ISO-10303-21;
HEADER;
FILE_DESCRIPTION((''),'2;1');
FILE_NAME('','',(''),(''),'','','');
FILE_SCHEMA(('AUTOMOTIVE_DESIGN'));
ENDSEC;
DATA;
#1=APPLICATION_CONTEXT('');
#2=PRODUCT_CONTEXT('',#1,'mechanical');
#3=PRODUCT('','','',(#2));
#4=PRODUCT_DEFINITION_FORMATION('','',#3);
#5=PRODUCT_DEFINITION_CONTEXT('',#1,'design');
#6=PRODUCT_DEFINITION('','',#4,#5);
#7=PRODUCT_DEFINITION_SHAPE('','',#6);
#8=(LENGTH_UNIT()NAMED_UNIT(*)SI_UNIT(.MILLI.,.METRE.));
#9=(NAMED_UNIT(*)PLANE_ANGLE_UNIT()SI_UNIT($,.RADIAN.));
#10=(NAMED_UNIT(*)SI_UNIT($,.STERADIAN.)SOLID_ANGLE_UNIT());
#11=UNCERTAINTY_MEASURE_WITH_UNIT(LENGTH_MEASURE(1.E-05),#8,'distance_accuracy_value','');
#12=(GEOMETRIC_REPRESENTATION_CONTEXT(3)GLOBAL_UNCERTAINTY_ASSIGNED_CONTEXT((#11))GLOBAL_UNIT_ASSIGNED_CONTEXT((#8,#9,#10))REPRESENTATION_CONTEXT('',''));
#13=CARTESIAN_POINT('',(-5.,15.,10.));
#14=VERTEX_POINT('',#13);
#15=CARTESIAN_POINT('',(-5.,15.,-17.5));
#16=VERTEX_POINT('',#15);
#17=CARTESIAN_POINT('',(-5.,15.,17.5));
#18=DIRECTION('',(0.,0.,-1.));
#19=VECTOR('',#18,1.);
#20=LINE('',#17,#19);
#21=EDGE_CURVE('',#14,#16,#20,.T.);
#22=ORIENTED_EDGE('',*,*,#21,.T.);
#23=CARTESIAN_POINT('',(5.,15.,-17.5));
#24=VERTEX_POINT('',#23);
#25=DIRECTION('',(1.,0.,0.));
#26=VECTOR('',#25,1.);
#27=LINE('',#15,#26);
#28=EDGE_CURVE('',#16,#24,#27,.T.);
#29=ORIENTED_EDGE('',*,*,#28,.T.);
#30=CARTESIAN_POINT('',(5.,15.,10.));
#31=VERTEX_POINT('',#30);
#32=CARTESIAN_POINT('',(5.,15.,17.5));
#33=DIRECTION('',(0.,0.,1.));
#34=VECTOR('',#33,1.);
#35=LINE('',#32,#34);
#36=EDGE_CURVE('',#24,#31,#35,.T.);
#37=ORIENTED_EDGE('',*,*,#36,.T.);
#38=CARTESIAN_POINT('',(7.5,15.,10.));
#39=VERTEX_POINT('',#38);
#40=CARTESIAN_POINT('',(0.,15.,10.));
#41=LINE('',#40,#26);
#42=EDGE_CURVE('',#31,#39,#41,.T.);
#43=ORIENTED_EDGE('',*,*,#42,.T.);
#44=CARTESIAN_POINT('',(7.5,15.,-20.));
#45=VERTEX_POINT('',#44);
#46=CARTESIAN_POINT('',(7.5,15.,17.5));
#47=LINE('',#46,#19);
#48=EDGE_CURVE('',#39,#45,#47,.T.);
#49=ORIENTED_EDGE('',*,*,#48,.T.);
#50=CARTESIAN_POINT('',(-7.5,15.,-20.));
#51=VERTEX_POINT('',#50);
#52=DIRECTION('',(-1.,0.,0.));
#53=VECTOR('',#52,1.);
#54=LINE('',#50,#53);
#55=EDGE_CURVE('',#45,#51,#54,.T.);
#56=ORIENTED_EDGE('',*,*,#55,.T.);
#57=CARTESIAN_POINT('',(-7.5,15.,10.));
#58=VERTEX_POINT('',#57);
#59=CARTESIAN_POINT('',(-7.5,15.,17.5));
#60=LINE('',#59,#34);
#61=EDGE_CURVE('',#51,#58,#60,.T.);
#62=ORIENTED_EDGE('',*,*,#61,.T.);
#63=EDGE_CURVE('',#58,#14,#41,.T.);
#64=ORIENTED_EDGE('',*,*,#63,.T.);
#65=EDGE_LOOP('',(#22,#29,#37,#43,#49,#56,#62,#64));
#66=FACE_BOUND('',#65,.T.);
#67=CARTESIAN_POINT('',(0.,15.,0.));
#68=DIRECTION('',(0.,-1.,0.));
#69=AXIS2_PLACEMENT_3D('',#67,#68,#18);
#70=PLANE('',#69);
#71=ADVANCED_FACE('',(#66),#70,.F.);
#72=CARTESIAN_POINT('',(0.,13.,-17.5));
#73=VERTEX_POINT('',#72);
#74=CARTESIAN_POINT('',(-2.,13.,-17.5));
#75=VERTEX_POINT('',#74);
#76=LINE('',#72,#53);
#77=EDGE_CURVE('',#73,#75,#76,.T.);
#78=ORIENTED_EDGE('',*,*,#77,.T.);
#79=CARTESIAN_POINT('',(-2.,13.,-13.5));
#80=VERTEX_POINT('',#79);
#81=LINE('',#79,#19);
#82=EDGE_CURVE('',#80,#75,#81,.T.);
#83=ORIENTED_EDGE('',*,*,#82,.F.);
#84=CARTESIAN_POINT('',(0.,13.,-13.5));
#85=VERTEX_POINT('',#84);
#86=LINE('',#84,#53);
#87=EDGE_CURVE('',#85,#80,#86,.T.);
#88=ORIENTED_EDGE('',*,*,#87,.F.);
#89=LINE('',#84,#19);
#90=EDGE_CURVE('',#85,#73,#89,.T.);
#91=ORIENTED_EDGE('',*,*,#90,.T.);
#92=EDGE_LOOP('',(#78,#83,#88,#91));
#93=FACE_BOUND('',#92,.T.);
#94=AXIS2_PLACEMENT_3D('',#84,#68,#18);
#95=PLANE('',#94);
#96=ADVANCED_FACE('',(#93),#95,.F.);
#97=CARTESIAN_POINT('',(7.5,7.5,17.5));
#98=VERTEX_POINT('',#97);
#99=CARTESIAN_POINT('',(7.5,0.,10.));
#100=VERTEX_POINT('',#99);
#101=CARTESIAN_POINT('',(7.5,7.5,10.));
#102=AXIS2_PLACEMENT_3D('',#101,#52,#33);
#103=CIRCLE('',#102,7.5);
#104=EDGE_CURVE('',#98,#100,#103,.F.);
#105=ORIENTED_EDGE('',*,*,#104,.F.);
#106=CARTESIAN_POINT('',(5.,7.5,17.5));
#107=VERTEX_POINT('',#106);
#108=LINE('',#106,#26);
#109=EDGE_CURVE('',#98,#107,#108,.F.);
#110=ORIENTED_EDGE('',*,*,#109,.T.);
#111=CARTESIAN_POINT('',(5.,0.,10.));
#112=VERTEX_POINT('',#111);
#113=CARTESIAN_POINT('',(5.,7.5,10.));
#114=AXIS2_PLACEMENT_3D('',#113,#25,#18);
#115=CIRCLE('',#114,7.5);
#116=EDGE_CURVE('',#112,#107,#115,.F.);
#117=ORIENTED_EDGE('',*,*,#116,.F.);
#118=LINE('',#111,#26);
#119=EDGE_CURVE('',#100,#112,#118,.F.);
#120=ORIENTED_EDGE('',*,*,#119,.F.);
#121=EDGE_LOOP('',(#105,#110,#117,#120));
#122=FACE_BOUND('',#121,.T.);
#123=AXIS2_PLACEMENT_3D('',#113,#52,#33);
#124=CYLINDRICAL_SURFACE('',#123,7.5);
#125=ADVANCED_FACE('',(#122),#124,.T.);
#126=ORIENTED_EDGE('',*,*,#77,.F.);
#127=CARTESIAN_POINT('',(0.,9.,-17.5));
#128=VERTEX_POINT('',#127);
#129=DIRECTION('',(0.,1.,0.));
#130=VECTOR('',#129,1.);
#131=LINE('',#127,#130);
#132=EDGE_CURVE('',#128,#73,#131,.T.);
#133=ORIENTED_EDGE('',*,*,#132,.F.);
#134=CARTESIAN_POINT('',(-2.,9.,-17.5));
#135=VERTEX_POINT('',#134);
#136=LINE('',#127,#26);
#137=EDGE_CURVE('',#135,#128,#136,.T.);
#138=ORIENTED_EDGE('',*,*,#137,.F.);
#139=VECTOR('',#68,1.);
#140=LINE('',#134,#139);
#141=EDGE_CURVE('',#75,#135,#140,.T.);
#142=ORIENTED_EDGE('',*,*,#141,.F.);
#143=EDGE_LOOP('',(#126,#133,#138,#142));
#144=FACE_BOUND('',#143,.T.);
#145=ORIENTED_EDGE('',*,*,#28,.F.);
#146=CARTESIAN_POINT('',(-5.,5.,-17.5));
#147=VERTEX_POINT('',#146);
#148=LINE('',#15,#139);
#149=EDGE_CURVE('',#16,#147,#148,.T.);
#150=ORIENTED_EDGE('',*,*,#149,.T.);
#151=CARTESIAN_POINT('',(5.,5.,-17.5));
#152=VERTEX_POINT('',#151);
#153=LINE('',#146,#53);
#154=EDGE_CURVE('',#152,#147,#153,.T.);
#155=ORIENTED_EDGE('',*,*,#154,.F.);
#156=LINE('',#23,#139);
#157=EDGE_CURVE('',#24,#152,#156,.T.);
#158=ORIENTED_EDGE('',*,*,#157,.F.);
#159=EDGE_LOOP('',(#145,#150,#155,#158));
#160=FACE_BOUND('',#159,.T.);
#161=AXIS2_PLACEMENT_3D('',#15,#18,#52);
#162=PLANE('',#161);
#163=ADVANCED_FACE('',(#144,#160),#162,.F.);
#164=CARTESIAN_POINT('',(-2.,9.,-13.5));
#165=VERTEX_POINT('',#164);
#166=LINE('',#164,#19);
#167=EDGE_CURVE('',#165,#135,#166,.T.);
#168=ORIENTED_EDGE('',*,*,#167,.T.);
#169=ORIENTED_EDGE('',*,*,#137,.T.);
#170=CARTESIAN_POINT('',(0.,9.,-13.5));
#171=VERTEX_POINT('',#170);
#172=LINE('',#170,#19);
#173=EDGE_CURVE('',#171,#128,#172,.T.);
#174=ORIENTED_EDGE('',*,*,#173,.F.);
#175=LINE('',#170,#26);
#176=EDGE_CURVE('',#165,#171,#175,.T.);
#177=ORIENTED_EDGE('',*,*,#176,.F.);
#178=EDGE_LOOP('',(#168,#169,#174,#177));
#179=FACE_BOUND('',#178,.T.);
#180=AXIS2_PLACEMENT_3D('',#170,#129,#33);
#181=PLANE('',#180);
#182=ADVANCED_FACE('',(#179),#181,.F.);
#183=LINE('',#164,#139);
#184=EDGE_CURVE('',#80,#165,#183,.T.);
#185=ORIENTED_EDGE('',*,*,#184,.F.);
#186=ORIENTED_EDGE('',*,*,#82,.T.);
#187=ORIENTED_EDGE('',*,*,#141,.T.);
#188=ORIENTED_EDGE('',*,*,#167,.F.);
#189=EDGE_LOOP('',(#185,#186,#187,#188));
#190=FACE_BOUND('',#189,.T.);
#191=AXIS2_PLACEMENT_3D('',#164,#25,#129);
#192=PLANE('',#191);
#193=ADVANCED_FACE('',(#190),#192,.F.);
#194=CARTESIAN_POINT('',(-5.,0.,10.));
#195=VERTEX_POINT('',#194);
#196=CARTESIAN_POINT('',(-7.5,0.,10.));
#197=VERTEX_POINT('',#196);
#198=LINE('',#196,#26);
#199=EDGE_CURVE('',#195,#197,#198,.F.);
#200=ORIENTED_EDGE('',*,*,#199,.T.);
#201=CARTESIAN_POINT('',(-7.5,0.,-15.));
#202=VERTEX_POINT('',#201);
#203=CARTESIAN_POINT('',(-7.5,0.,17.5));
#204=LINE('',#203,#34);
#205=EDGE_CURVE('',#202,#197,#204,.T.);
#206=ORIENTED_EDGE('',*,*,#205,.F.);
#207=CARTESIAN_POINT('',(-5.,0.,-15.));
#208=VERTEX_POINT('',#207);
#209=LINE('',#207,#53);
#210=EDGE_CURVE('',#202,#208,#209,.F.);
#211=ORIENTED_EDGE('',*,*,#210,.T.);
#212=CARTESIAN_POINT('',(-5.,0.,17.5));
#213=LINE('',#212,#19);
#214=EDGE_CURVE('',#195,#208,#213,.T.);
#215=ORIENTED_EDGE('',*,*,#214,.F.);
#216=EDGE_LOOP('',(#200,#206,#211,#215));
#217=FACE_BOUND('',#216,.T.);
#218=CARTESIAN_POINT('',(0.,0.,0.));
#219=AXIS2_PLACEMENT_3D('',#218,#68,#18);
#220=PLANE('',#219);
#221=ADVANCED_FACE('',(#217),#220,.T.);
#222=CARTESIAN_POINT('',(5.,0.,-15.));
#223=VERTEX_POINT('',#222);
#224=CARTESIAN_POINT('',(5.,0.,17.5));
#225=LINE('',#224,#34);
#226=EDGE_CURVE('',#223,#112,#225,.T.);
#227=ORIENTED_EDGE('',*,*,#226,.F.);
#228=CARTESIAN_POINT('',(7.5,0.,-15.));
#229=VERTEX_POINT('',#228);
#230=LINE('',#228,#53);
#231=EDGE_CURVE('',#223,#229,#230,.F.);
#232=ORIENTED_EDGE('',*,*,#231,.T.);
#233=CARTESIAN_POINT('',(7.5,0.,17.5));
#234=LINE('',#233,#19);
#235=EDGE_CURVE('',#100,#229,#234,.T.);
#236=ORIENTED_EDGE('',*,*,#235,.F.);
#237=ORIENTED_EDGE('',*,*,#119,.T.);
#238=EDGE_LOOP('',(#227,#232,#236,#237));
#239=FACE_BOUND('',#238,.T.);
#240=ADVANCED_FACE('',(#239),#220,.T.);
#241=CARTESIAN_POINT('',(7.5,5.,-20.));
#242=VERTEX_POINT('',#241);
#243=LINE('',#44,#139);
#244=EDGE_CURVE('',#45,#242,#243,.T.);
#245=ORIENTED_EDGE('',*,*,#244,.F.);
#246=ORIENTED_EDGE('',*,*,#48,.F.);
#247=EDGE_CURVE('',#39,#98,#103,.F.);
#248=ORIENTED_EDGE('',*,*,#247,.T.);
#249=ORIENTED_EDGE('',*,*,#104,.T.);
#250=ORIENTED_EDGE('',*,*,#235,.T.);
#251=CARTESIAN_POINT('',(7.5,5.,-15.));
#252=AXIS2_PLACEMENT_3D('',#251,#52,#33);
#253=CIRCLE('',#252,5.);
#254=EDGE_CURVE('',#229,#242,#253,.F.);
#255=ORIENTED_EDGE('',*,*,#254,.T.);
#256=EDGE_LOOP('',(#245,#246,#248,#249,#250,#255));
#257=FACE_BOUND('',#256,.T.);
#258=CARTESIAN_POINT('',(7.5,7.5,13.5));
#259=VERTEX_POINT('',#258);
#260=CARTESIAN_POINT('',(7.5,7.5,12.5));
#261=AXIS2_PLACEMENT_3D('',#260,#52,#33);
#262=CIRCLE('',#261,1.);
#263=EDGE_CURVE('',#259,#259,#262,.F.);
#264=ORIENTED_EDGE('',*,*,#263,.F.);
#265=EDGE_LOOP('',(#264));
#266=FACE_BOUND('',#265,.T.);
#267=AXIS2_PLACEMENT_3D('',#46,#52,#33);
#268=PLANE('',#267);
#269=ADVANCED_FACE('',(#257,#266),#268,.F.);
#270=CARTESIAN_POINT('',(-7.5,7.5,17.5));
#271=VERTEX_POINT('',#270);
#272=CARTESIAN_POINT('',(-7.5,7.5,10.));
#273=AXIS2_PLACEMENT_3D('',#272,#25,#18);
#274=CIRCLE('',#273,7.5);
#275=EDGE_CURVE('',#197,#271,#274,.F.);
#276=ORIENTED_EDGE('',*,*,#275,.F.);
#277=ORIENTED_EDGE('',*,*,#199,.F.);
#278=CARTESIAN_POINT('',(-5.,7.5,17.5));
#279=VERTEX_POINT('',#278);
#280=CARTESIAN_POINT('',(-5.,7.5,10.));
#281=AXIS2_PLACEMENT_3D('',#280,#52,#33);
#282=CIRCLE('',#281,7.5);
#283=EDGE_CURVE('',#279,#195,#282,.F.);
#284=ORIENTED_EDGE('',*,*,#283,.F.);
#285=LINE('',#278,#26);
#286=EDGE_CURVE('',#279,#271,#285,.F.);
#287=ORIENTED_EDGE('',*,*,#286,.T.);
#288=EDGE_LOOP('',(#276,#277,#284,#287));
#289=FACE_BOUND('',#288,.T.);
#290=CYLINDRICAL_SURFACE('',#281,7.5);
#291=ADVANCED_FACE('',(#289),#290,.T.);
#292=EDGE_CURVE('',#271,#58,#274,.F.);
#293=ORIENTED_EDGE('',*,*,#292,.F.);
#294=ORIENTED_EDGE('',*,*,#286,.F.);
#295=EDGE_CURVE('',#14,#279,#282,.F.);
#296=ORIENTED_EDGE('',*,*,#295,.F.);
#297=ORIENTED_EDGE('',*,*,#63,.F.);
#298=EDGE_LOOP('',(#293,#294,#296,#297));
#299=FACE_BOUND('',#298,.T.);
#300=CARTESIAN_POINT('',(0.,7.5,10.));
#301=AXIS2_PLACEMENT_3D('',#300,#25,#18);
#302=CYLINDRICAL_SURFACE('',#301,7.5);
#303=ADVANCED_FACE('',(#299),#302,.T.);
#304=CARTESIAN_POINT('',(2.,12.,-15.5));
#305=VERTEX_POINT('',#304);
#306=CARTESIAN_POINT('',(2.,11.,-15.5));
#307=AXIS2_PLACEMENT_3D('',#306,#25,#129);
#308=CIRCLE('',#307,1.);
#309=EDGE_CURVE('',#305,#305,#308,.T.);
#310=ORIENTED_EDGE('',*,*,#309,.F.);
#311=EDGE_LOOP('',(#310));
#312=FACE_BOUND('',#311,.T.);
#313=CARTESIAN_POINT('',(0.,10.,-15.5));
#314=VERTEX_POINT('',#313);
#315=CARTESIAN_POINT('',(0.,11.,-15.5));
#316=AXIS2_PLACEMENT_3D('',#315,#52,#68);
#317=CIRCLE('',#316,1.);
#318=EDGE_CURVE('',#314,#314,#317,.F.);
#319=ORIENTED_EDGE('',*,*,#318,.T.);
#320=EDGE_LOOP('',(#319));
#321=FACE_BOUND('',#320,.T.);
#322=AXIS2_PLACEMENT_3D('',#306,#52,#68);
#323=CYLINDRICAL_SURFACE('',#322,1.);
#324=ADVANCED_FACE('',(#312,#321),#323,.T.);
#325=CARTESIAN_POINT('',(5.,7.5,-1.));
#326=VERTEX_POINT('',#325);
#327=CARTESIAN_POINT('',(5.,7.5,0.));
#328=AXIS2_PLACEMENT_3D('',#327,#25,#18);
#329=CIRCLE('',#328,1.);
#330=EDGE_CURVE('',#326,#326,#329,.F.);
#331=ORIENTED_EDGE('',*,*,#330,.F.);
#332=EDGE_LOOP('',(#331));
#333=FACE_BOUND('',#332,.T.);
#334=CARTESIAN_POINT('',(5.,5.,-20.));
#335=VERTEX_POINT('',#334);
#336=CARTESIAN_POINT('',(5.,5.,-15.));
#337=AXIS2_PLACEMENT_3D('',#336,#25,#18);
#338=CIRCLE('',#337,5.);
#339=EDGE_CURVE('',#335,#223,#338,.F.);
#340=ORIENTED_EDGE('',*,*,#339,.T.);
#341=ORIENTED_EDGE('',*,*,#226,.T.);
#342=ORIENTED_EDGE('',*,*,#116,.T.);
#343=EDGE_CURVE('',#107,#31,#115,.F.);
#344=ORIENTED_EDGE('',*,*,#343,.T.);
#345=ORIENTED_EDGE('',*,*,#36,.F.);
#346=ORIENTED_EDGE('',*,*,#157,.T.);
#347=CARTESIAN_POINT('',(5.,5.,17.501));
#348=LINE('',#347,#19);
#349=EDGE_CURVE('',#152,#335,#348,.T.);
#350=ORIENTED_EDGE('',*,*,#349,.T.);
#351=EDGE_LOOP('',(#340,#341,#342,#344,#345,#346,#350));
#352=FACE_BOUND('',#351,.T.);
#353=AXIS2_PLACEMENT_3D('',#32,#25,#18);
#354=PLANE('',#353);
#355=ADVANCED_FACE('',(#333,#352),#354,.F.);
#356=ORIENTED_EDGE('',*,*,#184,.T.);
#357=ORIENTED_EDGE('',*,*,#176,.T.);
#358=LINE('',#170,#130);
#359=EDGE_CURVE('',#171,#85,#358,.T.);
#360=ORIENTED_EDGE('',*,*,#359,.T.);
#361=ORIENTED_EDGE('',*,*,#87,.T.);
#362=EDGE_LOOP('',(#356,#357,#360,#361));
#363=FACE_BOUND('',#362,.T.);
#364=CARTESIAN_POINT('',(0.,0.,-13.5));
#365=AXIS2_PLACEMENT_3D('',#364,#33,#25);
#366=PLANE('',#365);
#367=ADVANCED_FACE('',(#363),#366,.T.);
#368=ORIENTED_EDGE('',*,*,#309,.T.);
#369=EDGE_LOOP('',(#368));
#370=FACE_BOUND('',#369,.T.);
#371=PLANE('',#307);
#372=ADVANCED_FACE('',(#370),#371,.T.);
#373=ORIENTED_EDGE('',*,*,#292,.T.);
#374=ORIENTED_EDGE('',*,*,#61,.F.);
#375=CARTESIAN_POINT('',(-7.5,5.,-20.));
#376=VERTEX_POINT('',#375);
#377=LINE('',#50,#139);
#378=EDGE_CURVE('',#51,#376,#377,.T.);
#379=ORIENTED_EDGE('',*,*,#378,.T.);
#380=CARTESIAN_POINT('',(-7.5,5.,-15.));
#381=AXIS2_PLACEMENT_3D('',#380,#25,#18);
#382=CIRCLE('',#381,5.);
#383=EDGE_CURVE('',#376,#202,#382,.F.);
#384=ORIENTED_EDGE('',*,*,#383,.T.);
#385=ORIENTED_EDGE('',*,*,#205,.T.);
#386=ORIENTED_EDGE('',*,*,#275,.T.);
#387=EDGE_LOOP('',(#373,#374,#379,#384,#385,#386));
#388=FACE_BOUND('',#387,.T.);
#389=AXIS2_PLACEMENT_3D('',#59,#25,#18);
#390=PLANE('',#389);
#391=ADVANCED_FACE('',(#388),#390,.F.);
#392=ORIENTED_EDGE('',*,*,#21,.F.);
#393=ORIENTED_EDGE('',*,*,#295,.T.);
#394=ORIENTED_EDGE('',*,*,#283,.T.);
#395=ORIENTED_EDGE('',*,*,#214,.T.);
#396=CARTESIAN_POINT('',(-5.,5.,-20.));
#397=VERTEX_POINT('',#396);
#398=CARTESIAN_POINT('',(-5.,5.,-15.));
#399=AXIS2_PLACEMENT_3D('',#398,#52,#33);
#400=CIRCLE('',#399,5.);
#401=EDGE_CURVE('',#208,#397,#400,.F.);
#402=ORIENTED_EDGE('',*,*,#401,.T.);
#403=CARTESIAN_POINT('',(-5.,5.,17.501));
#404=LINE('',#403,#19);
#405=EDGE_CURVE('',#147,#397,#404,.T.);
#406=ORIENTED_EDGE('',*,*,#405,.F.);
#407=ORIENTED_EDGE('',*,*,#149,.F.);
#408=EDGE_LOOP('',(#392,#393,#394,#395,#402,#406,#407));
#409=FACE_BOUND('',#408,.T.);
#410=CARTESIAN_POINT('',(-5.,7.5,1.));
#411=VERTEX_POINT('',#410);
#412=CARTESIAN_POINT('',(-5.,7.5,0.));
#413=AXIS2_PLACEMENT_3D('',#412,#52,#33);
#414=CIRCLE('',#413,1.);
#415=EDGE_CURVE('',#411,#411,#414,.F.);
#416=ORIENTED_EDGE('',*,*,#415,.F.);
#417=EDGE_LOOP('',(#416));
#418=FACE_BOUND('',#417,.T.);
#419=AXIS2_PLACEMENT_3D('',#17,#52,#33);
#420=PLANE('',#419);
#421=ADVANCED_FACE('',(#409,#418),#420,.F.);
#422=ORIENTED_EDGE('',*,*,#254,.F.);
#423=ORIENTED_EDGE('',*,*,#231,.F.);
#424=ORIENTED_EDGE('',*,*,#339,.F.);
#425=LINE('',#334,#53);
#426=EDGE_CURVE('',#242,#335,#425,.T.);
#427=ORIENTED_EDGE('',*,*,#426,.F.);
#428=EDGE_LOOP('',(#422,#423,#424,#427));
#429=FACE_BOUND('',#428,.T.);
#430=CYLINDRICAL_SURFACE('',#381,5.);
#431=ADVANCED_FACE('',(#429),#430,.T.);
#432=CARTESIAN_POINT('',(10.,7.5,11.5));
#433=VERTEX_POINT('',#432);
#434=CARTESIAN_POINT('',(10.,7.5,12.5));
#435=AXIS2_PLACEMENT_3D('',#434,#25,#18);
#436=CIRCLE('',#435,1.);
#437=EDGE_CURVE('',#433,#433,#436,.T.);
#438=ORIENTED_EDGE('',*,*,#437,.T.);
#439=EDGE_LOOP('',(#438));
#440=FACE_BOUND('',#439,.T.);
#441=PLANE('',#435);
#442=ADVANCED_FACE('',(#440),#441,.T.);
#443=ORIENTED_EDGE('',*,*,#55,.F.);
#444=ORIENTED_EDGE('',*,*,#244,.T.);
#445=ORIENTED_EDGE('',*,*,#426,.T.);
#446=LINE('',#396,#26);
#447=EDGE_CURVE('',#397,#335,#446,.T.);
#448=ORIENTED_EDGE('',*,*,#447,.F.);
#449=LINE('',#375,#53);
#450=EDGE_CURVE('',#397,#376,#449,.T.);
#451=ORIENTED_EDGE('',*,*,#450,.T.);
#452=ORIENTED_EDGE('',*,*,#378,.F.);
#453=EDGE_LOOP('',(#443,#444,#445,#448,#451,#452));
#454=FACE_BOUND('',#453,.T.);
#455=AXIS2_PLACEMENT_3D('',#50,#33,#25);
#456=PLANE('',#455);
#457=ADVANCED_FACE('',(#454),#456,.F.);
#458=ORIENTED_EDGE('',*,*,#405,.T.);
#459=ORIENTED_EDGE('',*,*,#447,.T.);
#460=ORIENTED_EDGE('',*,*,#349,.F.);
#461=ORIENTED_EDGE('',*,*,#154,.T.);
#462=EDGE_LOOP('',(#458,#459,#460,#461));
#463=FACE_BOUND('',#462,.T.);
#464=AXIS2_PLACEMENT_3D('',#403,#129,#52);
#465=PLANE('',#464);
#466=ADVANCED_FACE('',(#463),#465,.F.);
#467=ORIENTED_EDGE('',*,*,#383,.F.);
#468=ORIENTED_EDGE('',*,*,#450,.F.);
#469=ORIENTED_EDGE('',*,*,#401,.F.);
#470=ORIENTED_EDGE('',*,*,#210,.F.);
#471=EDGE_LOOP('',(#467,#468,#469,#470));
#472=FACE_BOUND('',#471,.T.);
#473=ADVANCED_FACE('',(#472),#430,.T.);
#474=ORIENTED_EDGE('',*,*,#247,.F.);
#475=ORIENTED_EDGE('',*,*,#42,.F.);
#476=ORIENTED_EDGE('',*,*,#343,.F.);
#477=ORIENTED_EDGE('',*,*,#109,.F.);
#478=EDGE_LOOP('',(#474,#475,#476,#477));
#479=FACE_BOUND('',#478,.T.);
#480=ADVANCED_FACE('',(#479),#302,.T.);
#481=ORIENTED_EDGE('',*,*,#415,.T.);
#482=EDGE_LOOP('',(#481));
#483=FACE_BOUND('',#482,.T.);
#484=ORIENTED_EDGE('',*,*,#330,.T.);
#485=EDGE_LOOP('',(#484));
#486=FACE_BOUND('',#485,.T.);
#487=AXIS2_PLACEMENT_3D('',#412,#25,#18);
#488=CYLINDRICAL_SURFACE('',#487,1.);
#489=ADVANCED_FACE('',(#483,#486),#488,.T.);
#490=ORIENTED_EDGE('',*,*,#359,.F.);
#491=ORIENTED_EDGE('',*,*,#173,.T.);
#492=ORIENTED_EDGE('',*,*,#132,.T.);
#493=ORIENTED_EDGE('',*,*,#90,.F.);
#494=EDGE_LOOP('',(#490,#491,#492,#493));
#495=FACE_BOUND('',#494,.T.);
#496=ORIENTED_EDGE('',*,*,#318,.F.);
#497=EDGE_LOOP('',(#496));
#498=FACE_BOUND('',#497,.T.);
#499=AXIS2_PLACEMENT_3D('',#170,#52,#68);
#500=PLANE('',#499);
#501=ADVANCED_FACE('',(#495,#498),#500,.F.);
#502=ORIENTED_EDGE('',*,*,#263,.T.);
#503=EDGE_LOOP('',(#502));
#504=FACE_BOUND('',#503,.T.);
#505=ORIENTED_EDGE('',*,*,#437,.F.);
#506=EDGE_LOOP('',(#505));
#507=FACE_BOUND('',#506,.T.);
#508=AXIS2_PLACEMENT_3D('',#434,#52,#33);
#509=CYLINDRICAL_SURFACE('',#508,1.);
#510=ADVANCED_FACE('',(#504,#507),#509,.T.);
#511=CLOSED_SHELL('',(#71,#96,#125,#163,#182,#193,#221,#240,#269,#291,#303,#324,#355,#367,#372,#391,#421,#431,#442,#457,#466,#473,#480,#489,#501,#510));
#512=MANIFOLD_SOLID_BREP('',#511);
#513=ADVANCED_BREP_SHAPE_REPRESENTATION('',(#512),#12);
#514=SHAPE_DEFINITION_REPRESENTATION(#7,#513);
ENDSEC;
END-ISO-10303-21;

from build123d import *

# Parameters (mm, degrees)
BOSS_EXTRUDE1_DEPTH = 15
SKETCH4_R           = 1
BOSS_EXTRUDE3_DEPTH = 10
SKETCH5_R           = 1
BOSS_EXTRUDE4_DEPTH = 2.5
CUT_EXTRUDE1_REACH  = 43.608
SKETCH6_W           = 10
SKETCH6_H           = 5
FILLET1_R           = 7.5
FILLET2_R           = 5
SKETCH7_W           = 2
SKETCH7_H           = 4
BOSS_EXTRUDE5_DEPTH = 4
SKETCH8_R           = 1
BOSS_EXTRUDE6_DEPTH = 2


with BuildPart() as part:
    # Sketch1 → Boss-Extrude1 (new body)
    with BuildSketch(Plane(origin=(0, 0, 0), x_dir=(1, 0, 0), z_dir=(0, 1, 0))):
        Polygon((-7.5, -17.5), (-7.5, 20), (7.5, 20), (7.5, -17.5), (5, -17.5), (5, 17.5), (-5, 17.5), (-5, -17.5), align=None)
    extrude(amount=BOSS_EXTRUDE1_DEPTH)

    # Sketch4 → Boss-Extrude3 (add)
    with BuildSketch(Plane.ZY.offset(-5)):
        with Locations(Location((0, 7.5, 0), (0, 0, 180))):
            Circle(SKETCH4_R)
    extrude(amount=BOSS_EXTRUDE3_DEPTH)

    # Sketch5 → Boss-Extrude4 (add)
    with BuildSketch(Plane(origin=(7.5, 0, 0), x_dir=(0, 0, -1), z_dir=(1, 0, 0))):
        with Locations(Location((-12.5, 7.5, 0), (0, 0, 180))):
            Circle(SKETCH5_R)
    extrude(amount=BOSS_EXTRUDE4_DEPTH)

    # Sketch6 → Cut-Extrude1 (cut, up to next)
    with BuildSketch(Plane(origin=(0, 0, -20), x_dir=(-1, 0, 0), z_dir=(0, 0, -1)), mode=Mode.PRIVATE) as cut_extrude1_sk1:
        with Locations((0, 2.5)):
            Rectangle(SKETCH6_W, SKETCH6_H)
    cut_extrude1_tool1 = extrude(cut_extrude1_sk1.sketch, amount=-CUT_EXTRUDE1_REACH, mode=Mode.PRIVATE) & part.part
    add(cut_extrude1_tool1.solids().sort_by_distance((0, 2.5, -20))[0], mode=Mode.SUBTRACT)

    # Fillet1
    fillet1_edges = [part.edges().sort_by_distance(p)[0] for p in [
        (-6.25, 0, 17.5),
        (-6.25, 15, 17.5),
        (6.25, 0, 17.5),
        (6.25, 15, 17.5),
    ]]
    fillet(fillet1_edges, radius=FILLET1_R - 0.0001)  # a hair under: the kernel refuses the full size

    # Fillet2
    fillet2_edges = [part.edges().sort_by_distance(p)[0] for p in [
        (6.25, 0, -20),
        (-6.25, 0, -20),
    ]]
    fillet(fillet2_edges, radius=FILLET2_R)

    # Sketch7 → Boss-Extrude5 (add)
    with BuildSketch(Plane.XY.offset(-17.5)):
        with Locations((-1, 11)):
            Rectangle(SKETCH7_W, SKETCH7_H)
    extrude(amount=BOSS_EXTRUDE5_DEPTH)

    # Sketch8 → Boss-Extrude6 (add)
    with BuildSketch(Plane(origin=(0, 0, 0), x_dir=(0, 0, -1), z_dir=(1, 0, 0))):
        with Locations(Location((15.5, 11, 0), (0, 0, 270))):
            Circle(SKETCH8_R)
    extrude(amount=BOSS_EXTRUDE6_DEPTH)


solid = part.part
